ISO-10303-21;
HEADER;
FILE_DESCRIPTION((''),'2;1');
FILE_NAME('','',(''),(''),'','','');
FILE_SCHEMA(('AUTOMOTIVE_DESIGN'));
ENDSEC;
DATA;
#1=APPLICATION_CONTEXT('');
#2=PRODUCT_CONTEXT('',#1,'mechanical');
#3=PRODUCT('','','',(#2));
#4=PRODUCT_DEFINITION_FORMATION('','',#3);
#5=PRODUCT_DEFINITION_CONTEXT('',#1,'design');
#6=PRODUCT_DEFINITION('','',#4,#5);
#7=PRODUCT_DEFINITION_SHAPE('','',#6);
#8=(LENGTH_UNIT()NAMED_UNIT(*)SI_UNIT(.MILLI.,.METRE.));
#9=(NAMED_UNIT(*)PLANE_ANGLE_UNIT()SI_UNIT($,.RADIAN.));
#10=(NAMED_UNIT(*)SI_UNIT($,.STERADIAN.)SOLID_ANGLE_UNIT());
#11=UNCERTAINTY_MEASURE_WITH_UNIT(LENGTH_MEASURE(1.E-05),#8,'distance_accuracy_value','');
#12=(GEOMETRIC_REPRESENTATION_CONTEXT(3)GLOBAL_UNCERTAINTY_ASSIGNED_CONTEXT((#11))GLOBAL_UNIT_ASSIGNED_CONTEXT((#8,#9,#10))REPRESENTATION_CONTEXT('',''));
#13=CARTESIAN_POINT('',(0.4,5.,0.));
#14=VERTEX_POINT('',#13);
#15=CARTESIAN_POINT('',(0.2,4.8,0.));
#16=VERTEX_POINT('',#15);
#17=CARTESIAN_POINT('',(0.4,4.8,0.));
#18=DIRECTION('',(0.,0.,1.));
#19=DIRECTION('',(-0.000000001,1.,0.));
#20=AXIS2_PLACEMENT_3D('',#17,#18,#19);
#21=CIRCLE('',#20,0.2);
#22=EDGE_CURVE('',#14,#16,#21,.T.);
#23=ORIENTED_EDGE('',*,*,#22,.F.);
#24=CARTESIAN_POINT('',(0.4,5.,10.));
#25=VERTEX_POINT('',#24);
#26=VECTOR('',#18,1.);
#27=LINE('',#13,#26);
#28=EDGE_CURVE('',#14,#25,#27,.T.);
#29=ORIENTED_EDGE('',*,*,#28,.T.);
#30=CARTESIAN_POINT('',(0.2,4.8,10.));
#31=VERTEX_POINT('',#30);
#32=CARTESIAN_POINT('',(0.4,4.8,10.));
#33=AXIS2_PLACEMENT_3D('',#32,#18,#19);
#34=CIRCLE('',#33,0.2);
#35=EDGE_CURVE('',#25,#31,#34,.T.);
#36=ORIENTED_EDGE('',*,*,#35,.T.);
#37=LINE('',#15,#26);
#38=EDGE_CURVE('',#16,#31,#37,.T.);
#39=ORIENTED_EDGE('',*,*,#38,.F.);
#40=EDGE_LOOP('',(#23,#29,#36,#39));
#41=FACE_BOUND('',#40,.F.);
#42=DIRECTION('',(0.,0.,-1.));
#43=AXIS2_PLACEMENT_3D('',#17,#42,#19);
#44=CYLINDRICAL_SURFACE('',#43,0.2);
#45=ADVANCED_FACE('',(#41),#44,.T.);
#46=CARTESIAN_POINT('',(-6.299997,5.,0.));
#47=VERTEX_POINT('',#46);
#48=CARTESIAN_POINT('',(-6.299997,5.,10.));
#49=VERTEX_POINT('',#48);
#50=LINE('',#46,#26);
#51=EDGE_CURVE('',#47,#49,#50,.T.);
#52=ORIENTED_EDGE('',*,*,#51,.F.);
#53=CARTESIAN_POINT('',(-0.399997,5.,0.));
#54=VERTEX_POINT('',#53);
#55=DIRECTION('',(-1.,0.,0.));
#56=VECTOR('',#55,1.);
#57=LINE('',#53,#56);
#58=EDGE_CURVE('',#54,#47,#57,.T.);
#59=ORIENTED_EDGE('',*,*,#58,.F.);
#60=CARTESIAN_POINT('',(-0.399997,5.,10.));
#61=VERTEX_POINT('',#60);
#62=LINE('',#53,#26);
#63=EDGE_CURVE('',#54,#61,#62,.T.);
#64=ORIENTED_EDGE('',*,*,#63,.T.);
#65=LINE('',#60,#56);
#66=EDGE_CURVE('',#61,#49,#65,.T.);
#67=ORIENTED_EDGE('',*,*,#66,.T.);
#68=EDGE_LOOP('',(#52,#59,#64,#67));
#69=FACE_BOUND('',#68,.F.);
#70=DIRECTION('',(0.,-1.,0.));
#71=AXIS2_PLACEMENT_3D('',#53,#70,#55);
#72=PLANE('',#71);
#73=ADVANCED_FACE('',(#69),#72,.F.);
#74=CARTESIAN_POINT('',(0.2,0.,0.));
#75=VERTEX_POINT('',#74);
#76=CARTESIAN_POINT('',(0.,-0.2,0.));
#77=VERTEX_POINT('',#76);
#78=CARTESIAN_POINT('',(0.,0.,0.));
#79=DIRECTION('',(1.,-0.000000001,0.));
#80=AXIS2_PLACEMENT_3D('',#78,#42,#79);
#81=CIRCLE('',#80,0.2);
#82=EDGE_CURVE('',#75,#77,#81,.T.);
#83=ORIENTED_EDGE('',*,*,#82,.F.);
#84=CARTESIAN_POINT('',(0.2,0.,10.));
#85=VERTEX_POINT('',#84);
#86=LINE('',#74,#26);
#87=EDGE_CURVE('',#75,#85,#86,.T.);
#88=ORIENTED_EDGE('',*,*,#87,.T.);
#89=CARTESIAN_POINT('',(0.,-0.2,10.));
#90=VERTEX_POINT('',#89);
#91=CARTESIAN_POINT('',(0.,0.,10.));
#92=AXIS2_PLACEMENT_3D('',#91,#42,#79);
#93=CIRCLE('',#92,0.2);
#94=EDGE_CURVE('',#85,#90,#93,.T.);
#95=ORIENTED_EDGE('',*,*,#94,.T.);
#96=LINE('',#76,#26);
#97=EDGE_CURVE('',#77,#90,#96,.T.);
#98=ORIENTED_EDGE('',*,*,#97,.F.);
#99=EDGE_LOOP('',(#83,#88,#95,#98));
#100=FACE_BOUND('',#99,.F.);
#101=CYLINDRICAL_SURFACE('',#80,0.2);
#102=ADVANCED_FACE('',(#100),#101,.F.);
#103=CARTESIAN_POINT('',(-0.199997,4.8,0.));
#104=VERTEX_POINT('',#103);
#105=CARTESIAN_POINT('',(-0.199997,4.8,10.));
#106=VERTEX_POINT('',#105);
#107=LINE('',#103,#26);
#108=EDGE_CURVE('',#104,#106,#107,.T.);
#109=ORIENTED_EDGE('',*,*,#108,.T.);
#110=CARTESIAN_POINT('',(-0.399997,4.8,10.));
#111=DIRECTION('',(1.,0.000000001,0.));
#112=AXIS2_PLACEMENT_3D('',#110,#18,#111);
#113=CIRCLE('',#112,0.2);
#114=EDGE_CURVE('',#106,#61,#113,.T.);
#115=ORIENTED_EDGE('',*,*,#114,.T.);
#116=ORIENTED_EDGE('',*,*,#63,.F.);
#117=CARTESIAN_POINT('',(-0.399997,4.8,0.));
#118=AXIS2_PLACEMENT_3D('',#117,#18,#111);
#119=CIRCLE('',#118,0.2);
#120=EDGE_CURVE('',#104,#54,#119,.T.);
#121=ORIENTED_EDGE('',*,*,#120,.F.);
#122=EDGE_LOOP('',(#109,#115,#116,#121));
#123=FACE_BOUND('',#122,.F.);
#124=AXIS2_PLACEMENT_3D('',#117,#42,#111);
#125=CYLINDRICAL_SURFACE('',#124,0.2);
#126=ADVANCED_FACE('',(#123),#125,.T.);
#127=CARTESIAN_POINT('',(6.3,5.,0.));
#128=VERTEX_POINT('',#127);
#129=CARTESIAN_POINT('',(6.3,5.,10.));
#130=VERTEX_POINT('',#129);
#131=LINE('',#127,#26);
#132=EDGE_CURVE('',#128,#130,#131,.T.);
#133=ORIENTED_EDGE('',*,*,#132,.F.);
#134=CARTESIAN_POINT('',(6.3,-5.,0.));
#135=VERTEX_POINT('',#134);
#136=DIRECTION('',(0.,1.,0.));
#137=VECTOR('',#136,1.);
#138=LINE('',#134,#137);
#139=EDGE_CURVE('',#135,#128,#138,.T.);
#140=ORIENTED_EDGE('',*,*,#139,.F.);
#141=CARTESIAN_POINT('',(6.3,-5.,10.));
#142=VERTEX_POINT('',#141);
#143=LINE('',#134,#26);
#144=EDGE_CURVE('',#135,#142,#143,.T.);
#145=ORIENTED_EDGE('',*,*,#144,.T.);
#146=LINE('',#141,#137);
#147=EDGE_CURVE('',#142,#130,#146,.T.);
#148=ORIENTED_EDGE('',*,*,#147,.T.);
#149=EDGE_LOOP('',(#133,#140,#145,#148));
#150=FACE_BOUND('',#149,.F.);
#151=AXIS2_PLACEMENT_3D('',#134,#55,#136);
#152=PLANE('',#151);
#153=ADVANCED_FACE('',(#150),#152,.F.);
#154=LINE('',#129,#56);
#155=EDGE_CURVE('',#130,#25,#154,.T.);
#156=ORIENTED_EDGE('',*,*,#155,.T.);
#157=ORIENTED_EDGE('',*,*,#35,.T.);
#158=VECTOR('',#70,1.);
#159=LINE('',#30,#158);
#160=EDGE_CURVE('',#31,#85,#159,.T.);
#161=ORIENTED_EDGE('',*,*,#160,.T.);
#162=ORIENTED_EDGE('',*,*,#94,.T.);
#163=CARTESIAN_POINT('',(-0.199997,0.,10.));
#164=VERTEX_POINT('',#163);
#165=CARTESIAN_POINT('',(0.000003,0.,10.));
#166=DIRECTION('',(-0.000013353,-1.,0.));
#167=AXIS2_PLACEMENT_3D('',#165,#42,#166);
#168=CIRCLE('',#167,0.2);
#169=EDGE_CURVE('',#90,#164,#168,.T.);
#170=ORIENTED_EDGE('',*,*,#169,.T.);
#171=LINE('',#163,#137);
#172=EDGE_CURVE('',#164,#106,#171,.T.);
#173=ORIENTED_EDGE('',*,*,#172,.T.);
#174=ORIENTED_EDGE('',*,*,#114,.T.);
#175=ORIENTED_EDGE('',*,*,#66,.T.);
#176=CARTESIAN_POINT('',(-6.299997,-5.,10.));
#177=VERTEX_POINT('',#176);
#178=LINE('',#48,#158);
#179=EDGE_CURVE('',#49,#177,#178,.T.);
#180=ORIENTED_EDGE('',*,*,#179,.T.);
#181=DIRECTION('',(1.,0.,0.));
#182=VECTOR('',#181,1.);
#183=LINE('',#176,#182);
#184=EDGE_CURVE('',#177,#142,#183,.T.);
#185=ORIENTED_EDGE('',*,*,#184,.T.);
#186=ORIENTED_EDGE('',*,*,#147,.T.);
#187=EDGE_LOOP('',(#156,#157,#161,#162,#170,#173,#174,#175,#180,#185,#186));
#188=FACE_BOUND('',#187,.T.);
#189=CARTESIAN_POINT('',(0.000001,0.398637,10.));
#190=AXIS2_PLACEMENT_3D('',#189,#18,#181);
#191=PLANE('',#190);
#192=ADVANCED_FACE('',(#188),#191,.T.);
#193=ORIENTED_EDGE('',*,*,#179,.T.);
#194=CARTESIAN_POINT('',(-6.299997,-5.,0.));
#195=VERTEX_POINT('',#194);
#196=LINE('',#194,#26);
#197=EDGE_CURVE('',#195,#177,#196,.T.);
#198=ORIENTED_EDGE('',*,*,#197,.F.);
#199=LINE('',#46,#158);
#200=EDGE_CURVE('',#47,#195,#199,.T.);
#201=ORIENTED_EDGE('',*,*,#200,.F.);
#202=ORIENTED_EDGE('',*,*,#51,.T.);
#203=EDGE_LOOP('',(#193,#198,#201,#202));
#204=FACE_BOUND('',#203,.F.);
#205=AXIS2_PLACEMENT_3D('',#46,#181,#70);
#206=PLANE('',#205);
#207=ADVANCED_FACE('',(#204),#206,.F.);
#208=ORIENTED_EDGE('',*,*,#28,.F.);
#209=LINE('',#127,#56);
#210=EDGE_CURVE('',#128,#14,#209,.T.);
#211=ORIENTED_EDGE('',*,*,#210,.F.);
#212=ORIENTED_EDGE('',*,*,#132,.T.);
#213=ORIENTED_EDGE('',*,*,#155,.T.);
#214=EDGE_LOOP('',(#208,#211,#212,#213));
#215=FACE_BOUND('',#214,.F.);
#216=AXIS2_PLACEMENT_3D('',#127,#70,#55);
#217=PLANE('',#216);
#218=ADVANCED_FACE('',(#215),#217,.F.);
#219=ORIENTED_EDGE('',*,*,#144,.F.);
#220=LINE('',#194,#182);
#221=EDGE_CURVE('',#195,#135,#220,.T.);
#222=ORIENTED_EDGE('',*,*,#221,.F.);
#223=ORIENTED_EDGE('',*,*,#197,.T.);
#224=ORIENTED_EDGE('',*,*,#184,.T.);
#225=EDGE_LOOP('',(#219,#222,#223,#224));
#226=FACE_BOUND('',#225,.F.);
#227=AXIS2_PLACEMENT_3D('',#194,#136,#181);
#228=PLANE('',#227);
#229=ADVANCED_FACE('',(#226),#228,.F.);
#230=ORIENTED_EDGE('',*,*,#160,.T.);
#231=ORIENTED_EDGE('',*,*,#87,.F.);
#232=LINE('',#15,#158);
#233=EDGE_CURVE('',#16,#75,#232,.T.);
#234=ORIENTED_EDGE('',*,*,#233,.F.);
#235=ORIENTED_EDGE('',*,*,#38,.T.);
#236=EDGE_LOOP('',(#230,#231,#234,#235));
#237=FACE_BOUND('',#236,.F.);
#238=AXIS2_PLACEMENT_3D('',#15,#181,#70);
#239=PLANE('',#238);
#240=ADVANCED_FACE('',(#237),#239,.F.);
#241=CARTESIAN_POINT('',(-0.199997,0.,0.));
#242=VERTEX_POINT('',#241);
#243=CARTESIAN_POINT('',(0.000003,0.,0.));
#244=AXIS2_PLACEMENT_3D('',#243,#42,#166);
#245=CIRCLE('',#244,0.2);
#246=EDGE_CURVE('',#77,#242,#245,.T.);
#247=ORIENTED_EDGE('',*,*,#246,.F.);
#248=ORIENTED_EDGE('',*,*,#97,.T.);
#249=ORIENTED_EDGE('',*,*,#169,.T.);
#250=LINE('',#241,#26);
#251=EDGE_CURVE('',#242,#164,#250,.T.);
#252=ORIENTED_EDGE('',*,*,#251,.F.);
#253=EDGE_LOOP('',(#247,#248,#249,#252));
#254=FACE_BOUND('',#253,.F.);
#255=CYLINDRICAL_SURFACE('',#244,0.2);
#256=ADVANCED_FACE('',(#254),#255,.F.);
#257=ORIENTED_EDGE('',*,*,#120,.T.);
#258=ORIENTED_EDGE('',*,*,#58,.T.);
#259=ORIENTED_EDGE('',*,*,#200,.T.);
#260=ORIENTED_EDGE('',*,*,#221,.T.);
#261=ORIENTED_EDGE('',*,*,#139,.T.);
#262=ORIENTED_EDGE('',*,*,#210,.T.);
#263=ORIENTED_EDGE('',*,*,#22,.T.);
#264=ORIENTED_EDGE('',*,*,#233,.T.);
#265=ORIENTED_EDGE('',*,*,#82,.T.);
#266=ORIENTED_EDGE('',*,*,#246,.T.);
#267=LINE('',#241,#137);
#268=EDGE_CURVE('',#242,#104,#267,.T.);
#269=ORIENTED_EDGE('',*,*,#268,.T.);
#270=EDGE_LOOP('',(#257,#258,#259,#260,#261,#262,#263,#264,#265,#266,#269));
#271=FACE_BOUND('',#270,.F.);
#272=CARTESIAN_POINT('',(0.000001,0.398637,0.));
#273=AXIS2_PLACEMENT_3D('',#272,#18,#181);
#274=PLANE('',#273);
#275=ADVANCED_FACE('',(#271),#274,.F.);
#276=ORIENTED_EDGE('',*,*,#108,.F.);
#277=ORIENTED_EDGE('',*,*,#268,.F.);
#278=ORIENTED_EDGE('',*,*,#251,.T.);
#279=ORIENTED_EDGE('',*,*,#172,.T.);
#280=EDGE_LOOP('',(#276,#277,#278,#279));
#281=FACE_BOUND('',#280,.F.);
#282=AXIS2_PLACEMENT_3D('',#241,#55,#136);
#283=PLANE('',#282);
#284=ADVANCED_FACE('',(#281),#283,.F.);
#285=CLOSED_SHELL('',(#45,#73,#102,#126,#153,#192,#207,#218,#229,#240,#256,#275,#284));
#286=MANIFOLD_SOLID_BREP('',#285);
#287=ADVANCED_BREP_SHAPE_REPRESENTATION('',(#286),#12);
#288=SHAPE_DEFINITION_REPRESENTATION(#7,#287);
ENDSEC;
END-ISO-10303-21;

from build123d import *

# Parameters (mm, degrees)
F1_DEPTH = 10


# Not quite as in the source:
# - ends of sketch curves that miss each other by under 0.0002 mm in the source are joined


with BuildPart() as f1:
    # F0 (on Top) → F1 (new body)
    with BuildSketch(Plane.XY):
        with BuildLine():
            Line((-0.3999973293, 5), (-6.2999973293, 5))
            Line((-6.2999973293, 5), (-6.2999973293, -5))
            Line((-6.2999973293, -5), (6.3, -5))
            Line((6.3, -5), (6.3, 5))
            Line((6.3, 5), (0.4, 5))
            ThreePointArc((0.4, 5), (0.2585786438, 4.9414213562), (0.2, 4.8))
            Line((0.2, 4.8), (0.2, 0))
            ThreePointArc((0.2, 0), (0.1414213562, -0.1414213562), (0, -0.2))
            ThreePointArc((0, -0.2), (-0.1414186856, -0.1414213562), (-0.1999973293, 0))
            Line((-0.1999973293, 0), (-0.1999973293, 4.8))
            ThreePointArc((-0.1999973293, 4.8), (-0.2585759731, 4.9414213562), (-0.3999973293, 5))
        make_face()
    extrude(amount=F1_DEPTH)


solid = f1.part
